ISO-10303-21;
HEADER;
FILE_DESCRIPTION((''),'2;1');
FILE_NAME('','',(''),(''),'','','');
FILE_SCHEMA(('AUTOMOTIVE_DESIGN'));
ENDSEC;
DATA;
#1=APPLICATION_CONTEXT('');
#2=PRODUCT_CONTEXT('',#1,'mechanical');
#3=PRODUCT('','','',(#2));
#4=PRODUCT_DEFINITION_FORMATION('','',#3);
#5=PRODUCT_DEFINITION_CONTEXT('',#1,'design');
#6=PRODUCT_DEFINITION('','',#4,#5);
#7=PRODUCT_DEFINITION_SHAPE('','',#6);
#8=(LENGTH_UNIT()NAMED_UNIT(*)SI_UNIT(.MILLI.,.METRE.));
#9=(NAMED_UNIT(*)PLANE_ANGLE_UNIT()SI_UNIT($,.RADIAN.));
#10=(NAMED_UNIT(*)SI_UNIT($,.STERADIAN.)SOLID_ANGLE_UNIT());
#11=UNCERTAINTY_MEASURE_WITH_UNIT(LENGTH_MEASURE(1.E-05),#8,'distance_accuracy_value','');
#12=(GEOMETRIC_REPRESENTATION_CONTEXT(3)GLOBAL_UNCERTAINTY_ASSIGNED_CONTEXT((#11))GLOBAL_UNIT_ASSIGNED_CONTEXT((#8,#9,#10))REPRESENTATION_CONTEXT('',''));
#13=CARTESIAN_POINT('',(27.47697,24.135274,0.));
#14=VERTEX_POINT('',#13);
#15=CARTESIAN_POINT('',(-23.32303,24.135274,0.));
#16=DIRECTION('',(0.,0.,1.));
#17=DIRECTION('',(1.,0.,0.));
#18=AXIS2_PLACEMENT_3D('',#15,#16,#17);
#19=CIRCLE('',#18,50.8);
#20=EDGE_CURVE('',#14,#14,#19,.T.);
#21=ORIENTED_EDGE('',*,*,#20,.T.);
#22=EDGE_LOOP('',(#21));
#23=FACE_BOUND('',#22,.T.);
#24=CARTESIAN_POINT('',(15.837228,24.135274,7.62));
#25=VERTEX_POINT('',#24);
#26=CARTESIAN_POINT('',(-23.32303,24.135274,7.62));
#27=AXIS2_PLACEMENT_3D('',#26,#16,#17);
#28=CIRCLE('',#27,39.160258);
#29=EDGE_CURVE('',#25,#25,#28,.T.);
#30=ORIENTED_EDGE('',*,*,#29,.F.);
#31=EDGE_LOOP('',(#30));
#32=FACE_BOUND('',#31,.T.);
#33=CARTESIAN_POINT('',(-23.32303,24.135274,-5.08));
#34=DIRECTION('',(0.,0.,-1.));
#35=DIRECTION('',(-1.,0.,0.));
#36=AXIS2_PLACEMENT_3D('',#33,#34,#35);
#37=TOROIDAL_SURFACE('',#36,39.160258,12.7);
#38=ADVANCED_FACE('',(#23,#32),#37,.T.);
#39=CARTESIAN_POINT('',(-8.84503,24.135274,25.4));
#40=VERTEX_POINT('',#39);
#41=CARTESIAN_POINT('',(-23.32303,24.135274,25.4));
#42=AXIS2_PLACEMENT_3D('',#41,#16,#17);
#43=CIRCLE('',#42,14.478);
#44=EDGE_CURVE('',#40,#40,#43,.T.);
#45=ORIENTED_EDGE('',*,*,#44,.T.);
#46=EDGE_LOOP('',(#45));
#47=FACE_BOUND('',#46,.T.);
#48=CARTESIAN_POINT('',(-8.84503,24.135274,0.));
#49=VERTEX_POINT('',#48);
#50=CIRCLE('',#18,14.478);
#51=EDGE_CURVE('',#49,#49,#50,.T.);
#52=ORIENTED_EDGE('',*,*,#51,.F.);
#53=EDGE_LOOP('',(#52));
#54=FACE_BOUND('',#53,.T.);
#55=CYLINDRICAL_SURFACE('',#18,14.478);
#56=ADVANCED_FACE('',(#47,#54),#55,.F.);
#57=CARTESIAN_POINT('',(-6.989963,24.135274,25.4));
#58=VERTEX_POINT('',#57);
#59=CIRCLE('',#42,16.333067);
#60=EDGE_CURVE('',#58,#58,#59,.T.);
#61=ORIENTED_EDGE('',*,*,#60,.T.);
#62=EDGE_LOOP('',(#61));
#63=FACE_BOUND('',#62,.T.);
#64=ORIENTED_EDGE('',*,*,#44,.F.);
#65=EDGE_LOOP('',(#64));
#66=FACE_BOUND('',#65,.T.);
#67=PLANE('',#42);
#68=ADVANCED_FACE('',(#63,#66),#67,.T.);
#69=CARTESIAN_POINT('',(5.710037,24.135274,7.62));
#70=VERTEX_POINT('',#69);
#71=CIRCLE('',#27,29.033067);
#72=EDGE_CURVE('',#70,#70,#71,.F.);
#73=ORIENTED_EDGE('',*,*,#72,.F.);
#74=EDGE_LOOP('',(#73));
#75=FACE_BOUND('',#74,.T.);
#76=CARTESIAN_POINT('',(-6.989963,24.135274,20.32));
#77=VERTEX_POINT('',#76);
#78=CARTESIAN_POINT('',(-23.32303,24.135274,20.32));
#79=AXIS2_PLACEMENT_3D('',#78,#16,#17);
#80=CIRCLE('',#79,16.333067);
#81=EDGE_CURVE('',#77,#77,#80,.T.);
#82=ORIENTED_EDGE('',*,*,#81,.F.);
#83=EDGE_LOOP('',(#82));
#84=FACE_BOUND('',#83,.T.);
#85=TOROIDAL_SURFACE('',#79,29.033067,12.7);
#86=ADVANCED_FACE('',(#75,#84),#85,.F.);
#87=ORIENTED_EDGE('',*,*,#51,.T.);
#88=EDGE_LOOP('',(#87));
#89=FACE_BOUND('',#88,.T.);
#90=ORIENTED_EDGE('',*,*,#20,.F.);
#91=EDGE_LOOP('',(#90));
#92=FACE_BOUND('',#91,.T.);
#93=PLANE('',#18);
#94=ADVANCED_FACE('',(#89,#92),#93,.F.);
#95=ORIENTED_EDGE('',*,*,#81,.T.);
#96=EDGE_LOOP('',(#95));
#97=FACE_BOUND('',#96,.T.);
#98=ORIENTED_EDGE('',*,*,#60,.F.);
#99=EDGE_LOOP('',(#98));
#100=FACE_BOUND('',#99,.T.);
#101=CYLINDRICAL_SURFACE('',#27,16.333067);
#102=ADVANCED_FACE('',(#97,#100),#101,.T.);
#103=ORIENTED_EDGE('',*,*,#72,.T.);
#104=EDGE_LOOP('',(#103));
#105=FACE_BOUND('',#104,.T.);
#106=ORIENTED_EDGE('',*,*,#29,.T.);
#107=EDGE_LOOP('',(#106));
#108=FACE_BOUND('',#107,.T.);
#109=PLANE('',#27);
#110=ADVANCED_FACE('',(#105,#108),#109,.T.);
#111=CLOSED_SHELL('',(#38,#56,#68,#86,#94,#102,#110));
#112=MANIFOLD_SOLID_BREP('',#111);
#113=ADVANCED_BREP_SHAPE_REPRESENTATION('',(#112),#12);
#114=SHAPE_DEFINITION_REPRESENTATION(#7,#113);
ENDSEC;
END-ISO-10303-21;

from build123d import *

# Parameters (mm, degrees)
SKETCH1_R           = 50.8
BOSS_EXTRUDE1_DEPTH = 25.4
SKETCH2_R           = 14.478
CUT_EXTRUDE1_DEPTH  = 25.4
SKETCH3_OUTSIDE_W   = 132.782
SKETCH3_OUTSIDE_H   = 132.782
SKETCH3_OUTSIDE_R   = 16.333066569
CUT_EXTRUDE2_DEPTH  = 17.78
FILLET1_R           = 12.7
FILLET2_R           = 12.7


with BuildPart() as part:
    # Sketch1 → Boss-Extrude1 (new body)
    with BuildSketch(Plane.XY):
        with Locations((-23.323029636, 24.13527445)):
            Circle(SKETCH1_R)
    extrude(amount=BOSS_EXTRUDE1_DEPTH)

    # Sketch2 → Cut-Extrude1 (cut)
    with BuildSketch(Plane.XY.offset(25.4)):
        with Locations((-23.323029636, 24.13527445)):
            Circle(SKETCH2_R)
    extrude(amount=-CUT_EXTRUDE1_DEPTH, mode=Mode.SUBTRACT)

    # Sketch3 outside → Cut-Extrude2 (cut)
    with BuildSketch(Plane.XY.offset(25.4)):
        with Locations((-23.323, 24.135)):
            Rectangle(SKETCH3_OUTSIDE_W, SKETCH3_OUTSIDE_H)
        with Locations((-23.323029636, 24.13527445)):
            Circle(SKETCH3_OUTSIDE_R, mode=Mode.SUBTRACT)
    extrude(amount=-CUT_EXTRUDE2_DEPTH, mode=Mode.SUBTRACT)

    # Fillet1
    fillet1_edges = [part.edges().sort_by_distance(p)[0] for p in [
        (-39.656096206, 24.13527445, 7.62),
    ]]
    fillet(fillet1_edges, radius=FILLET1_R)

    # Fillet2
    # the kernel refuses this fillet: 12.7 mm, written as the material it takes off along each edge
    with BuildSketch(Plane(origin=(-23.323029636, 24.13527445, 7.62), x_dir=(1, 0, 0), z_dir=(0, 1, 0))) as fillet2_piece_1:
        with BuildLine():
            CenterArc((39.160257735, 12.7), FILLET2_R, 270, 66.421821522)
            Line((50.8, 7.62), (51.032794845, 7.5184))
            ThreePointArc((51.032794845, 7.5184), (51.054, 3.81), (51.054, 0))
            Line((51.054, 0), (50.8, -0.254))
            Line((50.8, -0.254), (39.160257735, -0.254))
            Line((39.160257735, -0.254), (39.160257735, 0))
        make_face()
    revolve(axis=Axis((-23.323029636, 24.13527445, 7.62), (0, 0, -1)), mode=Mode.SUBTRACT)


solid = part.part
